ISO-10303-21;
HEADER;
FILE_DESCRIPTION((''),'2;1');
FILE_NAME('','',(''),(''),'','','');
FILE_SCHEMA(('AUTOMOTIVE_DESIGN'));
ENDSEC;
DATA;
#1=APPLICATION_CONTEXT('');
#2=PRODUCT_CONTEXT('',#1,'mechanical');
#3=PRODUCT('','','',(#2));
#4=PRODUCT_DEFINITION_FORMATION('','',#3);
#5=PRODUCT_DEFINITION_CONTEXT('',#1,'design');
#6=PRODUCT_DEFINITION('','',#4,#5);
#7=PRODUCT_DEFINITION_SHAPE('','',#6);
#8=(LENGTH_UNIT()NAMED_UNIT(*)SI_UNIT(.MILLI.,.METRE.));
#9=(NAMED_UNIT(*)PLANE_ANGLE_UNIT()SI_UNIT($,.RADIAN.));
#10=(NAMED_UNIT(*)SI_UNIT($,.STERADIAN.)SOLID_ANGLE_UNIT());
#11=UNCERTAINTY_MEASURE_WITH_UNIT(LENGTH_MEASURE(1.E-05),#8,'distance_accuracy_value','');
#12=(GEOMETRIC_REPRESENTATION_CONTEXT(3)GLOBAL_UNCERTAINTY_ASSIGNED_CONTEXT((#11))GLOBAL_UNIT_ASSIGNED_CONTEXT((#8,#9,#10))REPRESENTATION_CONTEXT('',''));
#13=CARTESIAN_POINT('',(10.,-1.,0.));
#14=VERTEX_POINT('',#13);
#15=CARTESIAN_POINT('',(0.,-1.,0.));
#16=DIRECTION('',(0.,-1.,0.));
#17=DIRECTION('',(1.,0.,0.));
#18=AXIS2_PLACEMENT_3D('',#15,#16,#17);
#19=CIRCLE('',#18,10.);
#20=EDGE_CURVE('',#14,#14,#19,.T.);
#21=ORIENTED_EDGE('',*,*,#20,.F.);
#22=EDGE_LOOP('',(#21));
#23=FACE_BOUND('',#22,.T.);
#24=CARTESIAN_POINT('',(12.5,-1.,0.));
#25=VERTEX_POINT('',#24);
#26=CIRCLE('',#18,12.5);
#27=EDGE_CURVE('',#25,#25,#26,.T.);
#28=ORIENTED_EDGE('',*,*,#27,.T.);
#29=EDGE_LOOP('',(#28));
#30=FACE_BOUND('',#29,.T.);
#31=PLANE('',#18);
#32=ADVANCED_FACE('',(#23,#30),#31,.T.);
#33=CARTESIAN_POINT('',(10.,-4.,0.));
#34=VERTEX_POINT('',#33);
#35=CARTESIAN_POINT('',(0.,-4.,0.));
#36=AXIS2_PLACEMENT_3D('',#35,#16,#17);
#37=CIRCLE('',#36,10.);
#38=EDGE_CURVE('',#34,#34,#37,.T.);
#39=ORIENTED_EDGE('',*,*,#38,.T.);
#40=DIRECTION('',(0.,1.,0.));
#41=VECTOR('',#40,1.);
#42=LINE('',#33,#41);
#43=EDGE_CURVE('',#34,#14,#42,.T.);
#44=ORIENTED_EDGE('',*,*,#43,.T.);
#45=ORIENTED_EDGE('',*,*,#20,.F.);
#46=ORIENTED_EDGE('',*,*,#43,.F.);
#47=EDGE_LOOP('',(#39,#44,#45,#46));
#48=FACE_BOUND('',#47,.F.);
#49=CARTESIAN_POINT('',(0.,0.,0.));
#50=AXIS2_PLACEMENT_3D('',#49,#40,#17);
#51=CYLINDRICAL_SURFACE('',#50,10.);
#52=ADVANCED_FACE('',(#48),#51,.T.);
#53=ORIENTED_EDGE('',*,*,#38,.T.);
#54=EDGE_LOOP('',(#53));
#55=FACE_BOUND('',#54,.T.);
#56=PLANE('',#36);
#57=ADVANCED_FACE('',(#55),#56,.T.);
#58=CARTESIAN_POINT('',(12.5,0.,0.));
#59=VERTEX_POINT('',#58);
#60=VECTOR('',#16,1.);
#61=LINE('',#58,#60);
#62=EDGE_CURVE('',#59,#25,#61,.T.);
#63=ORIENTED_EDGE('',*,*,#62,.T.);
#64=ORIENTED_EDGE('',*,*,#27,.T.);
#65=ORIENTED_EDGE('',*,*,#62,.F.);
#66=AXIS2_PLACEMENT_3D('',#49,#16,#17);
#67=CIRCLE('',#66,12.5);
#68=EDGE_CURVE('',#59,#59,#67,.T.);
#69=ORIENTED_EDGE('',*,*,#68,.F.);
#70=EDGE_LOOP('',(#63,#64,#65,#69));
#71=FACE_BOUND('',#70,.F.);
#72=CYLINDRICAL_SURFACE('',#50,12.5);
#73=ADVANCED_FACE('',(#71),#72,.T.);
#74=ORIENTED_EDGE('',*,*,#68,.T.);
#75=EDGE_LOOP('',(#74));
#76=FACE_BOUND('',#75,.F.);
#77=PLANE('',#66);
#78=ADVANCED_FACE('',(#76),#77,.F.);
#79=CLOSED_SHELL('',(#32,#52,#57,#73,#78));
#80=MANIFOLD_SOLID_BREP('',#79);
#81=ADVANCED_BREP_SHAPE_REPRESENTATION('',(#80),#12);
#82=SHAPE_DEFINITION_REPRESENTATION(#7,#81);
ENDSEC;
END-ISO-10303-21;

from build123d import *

# Parameters (mm, degrees)
F0_R      = 10
F1_DEPTH  = 3
F0_R_2    = 12.5
F1_FACE_R = 10
F2_DEPTH  = 1


# Not quite as in the source:
# - a feature of the source that left no trace in its solid (it failed there, or was rolled back) is left out


with BuildPart() as f1:
    # F0 (on Front) → F1 (new body)
    with BuildSketch(Plane.XZ):
        Circle(F0_R)
    extrude(amount=F1_DEPTH)

    # F0 (on Front) + F1_face (on face) → F2 (join)
    with BuildSketch(Plane.XZ):
        Circle(F0_R_2)
        Circle(F0_R, mode=Mode.SUBTRACT)
    with BuildSketch(Plane.XZ.offset(3)):
        Circle(F1_FACE_R)
    extrude(amount=F2_DEPTH)


solid = f1.part
